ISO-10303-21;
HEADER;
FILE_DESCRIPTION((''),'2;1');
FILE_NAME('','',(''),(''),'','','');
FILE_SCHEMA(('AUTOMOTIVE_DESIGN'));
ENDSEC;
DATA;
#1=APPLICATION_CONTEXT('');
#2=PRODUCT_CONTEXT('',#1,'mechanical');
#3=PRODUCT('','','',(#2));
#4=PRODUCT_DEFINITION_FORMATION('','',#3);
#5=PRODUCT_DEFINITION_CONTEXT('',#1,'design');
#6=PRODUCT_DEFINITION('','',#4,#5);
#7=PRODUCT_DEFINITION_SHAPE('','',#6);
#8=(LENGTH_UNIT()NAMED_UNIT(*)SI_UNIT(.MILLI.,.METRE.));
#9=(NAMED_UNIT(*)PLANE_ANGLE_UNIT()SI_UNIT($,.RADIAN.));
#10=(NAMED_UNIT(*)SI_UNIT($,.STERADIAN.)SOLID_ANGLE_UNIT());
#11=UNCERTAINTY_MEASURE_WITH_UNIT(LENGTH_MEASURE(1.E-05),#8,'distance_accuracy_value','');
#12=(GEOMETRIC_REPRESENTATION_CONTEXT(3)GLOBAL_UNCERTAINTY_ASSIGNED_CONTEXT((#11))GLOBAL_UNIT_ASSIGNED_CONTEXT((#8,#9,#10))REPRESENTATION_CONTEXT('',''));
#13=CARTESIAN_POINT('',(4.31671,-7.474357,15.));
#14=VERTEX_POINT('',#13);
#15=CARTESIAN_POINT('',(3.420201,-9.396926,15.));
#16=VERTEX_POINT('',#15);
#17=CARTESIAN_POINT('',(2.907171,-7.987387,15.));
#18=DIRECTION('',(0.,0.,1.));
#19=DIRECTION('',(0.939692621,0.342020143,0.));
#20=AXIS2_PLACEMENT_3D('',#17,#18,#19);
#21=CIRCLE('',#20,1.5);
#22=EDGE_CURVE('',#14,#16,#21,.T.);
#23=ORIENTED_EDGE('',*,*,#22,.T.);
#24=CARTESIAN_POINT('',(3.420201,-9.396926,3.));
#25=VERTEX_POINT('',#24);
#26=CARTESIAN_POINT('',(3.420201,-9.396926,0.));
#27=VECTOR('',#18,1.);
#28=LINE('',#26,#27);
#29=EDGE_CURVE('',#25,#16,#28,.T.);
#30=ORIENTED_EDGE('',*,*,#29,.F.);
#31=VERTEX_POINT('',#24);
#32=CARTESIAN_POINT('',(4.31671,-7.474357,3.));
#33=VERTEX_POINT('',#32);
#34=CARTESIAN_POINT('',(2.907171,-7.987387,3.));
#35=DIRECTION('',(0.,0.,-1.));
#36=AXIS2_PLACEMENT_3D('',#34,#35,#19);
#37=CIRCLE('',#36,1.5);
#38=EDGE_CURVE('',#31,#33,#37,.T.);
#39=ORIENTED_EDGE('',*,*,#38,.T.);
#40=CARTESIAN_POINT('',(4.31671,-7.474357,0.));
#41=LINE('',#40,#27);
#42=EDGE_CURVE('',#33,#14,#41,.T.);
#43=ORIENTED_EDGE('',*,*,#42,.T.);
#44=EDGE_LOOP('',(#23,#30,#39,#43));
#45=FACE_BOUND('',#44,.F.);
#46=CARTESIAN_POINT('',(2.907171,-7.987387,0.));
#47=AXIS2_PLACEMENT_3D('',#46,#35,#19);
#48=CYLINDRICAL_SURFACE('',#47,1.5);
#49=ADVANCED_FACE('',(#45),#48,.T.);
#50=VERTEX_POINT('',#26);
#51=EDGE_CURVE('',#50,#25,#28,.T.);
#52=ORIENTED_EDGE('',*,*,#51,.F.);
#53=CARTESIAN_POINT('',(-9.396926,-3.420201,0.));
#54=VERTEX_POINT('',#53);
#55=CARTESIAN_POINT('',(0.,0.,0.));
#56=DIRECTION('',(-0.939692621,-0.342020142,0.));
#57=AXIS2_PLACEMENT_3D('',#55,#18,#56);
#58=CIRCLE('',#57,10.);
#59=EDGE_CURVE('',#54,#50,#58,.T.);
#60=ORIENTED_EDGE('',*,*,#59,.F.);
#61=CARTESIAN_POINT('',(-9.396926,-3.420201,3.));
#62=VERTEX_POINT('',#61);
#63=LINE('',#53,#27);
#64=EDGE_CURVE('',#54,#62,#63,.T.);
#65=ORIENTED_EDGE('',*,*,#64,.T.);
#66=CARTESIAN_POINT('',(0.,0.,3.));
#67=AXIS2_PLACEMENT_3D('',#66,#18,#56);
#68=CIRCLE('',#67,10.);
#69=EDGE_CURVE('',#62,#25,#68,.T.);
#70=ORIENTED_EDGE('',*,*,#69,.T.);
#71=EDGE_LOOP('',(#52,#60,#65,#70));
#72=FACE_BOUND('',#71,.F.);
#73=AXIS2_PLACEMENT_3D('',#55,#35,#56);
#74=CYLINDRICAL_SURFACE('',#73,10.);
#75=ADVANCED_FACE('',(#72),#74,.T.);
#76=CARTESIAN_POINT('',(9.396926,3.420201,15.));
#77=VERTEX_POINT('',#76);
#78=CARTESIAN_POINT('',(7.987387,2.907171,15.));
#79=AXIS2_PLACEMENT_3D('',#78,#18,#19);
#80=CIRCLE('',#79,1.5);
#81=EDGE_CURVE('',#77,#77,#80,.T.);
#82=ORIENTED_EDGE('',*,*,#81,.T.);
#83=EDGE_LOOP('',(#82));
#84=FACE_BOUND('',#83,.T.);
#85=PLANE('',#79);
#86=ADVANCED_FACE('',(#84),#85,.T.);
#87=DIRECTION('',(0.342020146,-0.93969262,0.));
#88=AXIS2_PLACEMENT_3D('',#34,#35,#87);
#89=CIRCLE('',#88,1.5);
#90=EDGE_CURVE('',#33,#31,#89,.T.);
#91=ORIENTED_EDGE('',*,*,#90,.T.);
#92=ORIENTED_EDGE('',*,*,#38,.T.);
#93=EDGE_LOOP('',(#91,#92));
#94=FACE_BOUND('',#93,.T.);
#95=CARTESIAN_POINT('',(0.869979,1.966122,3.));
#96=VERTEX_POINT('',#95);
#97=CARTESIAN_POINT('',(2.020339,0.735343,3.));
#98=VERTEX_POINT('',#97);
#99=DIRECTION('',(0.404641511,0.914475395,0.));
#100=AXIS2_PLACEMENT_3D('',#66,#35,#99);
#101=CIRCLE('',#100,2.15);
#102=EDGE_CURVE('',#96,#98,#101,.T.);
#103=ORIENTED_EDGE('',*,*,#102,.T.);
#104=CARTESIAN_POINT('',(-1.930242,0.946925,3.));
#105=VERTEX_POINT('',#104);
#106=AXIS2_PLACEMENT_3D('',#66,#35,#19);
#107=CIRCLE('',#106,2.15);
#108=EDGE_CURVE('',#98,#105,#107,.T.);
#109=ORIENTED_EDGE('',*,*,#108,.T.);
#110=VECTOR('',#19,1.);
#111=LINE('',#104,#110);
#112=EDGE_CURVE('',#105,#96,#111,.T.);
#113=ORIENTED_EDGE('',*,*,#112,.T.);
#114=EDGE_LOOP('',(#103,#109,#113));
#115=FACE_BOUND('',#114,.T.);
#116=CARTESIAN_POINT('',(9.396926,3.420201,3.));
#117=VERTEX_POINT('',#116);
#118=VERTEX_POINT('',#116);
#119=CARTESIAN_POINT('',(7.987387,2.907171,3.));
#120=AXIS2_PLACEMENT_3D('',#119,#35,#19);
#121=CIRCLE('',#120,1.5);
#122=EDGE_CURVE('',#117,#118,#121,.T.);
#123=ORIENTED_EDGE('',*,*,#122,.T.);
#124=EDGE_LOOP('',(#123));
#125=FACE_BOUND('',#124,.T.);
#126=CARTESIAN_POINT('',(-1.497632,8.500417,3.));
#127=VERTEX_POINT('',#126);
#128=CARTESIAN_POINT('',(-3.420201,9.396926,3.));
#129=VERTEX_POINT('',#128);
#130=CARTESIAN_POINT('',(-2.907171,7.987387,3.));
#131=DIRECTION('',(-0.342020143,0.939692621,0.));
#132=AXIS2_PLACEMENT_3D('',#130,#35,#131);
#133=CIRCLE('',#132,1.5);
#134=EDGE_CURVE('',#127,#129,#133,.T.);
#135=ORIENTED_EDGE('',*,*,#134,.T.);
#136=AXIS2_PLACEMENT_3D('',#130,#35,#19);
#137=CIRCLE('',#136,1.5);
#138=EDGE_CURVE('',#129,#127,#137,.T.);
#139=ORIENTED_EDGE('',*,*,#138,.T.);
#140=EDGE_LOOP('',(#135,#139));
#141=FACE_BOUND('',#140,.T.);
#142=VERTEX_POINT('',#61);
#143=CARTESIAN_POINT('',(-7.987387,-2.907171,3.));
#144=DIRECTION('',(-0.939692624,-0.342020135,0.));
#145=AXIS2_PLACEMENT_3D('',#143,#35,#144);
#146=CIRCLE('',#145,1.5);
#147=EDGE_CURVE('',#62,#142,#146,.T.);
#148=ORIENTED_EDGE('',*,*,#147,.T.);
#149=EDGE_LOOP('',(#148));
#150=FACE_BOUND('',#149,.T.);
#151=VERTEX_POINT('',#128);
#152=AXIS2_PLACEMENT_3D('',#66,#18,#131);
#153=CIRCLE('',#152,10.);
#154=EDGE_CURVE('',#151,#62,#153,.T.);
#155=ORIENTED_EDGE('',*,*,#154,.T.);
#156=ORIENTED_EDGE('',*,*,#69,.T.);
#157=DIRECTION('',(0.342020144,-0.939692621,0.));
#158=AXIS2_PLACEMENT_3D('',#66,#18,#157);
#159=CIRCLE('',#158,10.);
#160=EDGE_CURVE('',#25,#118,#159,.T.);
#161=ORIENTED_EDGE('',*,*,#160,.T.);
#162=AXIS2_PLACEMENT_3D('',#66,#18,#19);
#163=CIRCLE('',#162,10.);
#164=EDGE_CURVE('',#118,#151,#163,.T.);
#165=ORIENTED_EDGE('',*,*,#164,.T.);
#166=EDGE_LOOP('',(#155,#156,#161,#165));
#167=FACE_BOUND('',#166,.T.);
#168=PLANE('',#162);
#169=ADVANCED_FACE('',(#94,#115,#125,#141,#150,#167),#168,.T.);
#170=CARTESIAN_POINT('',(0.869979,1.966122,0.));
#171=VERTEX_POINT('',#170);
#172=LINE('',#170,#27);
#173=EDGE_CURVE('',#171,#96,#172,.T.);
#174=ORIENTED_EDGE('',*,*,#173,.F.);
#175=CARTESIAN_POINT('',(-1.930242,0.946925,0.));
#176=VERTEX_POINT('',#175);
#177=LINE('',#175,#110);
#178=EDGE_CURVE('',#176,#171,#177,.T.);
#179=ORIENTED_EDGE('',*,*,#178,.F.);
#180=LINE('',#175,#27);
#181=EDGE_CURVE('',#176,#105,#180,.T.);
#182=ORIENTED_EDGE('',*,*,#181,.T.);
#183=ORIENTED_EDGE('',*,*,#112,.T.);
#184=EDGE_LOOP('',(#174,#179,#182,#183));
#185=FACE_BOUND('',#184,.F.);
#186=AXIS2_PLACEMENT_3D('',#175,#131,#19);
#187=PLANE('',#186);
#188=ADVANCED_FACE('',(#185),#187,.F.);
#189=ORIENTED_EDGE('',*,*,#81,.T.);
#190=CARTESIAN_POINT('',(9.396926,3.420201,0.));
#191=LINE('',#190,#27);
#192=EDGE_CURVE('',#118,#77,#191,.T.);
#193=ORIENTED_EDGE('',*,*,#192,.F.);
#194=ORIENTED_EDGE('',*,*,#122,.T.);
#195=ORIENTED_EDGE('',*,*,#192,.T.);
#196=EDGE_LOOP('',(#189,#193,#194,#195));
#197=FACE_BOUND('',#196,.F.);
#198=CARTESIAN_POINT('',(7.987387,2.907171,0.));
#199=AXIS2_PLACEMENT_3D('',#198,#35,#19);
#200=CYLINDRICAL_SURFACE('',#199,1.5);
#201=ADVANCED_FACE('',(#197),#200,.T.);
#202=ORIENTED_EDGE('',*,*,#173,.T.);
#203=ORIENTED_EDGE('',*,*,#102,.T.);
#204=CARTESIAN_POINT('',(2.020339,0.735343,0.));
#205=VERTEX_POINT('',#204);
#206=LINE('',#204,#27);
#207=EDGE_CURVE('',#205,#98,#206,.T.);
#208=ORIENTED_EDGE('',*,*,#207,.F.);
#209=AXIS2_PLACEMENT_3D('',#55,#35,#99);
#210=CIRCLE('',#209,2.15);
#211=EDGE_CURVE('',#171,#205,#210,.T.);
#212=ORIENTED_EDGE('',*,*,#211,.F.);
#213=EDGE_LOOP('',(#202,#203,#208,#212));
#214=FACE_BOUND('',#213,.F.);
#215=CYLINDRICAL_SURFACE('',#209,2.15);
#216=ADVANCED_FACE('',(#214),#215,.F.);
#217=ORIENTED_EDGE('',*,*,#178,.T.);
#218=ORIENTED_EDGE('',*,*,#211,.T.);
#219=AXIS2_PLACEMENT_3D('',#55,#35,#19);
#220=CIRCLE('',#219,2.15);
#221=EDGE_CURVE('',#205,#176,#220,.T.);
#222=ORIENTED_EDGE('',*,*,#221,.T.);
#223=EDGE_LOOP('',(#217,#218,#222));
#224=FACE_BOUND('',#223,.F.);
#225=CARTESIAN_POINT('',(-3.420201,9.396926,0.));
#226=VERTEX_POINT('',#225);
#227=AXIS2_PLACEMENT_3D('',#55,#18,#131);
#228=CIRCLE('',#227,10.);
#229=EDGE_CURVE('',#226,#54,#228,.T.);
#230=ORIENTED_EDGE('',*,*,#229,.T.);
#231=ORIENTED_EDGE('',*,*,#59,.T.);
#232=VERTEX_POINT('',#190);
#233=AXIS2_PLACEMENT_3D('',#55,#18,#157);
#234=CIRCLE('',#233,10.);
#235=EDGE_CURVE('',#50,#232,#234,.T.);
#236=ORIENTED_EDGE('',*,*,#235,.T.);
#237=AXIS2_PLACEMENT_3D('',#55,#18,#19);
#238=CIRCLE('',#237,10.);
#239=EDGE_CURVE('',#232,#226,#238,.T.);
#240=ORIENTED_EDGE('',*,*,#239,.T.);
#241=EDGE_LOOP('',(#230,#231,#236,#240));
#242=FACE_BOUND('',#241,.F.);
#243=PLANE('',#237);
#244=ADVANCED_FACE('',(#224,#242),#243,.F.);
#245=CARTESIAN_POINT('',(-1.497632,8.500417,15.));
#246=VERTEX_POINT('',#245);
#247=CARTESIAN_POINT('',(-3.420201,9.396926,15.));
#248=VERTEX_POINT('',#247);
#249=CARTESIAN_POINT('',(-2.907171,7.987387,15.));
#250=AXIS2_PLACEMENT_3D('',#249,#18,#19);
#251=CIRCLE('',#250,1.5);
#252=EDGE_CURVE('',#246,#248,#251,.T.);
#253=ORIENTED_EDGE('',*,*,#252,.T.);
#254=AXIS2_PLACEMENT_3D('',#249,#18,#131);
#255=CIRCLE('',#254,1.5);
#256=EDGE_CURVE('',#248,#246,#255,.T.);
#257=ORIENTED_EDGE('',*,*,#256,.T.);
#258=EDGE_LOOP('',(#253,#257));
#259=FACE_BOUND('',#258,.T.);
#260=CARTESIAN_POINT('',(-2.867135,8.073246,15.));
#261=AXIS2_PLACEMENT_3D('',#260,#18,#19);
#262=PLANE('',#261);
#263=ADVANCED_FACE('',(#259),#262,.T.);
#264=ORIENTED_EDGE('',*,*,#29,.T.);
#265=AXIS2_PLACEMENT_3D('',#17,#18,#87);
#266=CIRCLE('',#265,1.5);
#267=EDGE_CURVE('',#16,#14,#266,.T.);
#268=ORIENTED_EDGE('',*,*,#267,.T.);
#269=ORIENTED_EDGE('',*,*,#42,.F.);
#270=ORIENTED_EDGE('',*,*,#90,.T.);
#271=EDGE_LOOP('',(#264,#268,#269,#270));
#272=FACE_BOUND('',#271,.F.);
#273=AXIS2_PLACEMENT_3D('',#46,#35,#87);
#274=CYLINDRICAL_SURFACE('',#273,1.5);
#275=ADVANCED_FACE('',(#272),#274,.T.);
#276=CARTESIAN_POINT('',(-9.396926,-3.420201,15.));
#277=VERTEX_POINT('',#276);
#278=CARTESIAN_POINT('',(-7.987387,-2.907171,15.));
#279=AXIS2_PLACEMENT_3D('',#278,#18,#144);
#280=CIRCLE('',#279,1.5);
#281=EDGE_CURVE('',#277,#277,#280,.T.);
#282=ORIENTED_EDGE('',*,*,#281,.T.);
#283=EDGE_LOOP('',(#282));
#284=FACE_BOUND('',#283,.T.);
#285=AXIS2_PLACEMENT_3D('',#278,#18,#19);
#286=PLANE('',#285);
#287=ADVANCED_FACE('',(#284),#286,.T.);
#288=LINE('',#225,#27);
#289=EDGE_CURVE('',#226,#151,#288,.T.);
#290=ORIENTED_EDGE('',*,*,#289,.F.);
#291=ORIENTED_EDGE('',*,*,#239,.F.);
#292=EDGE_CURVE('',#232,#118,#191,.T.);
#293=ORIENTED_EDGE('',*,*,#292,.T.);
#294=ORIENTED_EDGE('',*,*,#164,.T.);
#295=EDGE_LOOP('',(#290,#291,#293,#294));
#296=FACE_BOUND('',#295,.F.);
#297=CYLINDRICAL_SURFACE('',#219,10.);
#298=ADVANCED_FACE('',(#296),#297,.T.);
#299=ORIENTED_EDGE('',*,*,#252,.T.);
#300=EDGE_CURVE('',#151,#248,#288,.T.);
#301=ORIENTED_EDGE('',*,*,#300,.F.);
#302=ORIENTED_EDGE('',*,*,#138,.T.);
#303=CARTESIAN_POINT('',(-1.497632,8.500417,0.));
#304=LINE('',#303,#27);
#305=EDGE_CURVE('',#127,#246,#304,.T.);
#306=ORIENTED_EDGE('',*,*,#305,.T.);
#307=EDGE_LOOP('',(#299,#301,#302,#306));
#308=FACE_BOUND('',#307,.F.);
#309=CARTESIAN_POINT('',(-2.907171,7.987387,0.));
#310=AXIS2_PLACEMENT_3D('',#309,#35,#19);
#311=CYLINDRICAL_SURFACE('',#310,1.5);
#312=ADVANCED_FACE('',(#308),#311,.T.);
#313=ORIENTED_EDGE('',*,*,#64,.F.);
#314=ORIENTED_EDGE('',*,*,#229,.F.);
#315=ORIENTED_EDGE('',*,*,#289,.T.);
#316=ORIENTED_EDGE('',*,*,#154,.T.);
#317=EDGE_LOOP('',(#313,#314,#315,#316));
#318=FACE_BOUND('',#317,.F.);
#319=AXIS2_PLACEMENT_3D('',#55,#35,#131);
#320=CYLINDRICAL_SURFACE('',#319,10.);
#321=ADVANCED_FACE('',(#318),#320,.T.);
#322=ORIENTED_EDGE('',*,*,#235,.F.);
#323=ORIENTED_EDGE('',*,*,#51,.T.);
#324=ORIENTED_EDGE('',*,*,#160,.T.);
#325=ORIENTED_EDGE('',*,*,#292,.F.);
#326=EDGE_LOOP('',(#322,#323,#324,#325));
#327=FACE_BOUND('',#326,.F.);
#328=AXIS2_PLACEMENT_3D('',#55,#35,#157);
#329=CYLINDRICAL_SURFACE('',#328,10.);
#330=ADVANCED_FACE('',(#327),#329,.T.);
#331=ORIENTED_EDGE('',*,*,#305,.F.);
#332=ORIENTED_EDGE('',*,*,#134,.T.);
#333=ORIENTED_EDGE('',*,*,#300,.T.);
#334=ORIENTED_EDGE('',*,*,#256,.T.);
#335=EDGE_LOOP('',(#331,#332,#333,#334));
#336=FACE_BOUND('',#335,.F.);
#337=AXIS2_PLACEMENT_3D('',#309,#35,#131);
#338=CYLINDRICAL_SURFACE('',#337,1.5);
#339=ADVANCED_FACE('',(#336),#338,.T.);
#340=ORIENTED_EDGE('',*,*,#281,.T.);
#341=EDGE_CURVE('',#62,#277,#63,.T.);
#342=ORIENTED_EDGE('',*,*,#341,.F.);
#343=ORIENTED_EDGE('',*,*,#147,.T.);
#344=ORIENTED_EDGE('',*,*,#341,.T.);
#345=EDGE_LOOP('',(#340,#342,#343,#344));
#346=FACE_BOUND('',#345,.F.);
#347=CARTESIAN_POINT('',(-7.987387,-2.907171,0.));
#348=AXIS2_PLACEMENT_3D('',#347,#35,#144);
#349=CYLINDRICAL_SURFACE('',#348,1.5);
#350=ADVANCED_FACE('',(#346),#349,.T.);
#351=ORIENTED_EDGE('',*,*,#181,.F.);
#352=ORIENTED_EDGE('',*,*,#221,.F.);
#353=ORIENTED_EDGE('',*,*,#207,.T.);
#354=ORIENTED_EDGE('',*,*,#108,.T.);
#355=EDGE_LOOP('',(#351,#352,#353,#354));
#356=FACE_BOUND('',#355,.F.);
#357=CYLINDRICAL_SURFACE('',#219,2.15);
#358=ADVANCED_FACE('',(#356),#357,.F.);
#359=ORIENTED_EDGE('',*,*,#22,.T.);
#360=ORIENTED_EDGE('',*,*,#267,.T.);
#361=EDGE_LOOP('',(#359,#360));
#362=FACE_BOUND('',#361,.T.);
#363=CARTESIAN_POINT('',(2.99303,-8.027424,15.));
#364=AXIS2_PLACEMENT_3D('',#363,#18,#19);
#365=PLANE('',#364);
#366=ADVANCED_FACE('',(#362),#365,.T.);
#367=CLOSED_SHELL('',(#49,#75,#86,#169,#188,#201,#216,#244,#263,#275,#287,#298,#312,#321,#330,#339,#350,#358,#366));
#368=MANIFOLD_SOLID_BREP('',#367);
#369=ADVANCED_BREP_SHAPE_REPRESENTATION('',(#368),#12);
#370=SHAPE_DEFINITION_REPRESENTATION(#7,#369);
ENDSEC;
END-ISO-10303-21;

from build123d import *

# Parameters (mm, degrees)
F0_R     = 1.5
F1_DEPTH = 3
F2_DEPTH = 15
F4_ANGLE = 20


# Not quite as in the source:
# - a feature names something its author has since deleted; it is built from what else it names


with BuildPart() as f1:
    # F0 (on Top) → F1 (new body)
    with BuildSketch(Plane.XY):
        with BuildLine():
            ThreePointArc((4.3e-09, -10), (7.0710678134, -7.0710678103), (10, 0))
            ThreePointArc((10, 0), (7.0710678119, 7.0710678119), (0, 10))
            ThreePointArc((0, 10), (-7.0710678074, 7.0710678163), (-10, 1.26e-08))
            ThreePointArc((-10, 1.26e-08), (-7.0710678148, -7.0710678089), (4.3e-09, -10))
        make_face()
        with BuildLine():
            ThreePointArc((1.5, -8.5), (1.0606601733, -9.5606601703), (4.3e-09, -10))
            ThreePointArc((4.3e-09, -10), (-1.0606601733, -7.4393398297), (1.5, -8.5))
        make_face(mode=Mode.SUBTRACT)
        with BuildLine():
            ThreePointArc((-7, 0), (-8.5000000063, -1.5), (-10, 1.26e-08))
            ThreePointArc((-10, 1.26e-08), (-8.4999999937, 1.5), (-7, 0))
        make_face(mode=Mode.SUBTRACT)
        with BuildLine():
            ThreePointArc((1.4899664426, 1.55), (1.9781213122, 0.842339643), (2.15, 0))
            ThreePointArc((2.15, 0), (-0.842339643, -1.9781213122), (-1.4899664426, 1.55))
            ThreePointArc((-1.4899664426, 1.55), (0, 2.15), (1.4899664426, 1.55))
        make_face(mode=Mode.SUBTRACT)
        with Locations((8.5, 0)):
            Circle(F0_R, mode=Mode.SUBTRACT)
        with BuildLine():
            ThreePointArc((1.5, 8.5), (-1.0606601718, 7.4393398282), (0, 10))
            ThreePointArc((0, 10), (1.0606601718, 9.5606601718), (1.5, 8.5))
        make_face(mode=Mode.SUBTRACT)
        with BuildLine():
            ThreePointArc((-7, 0), (-8.4999999937, 1.5), (-10, 1.26e-08))
            ThreePointArc((-10, 1.26e-08), (-8.5000000063, -1.5), (-7, 0))
        make_face()
        with BuildLine():
            ThreePointArc((1.5, -8.5), (-1.0606601733, -7.4393398297), (4.3e-09, -10))
            ThreePointArc((4.3e-09, -10), (1.0606601733, -9.5606601703), (1.5, -8.5))
        make_face()
        with Locations((8.5, 0)):
            Circle(F0_R)
        with BuildLine():
            ThreePointArc((1.5, 8.5), (1.0606601718, 9.5606601718), (0, 10))
            ThreePointArc((0, 10), (-1.0606601718, 7.4393398282), (1.5, 8.5))
        make_face()
        with BuildLine():
            Line((-1.4899664426, 1.55), (1.4899664426, 1.55))
            ThreePointArc((1.4899664426, 1.55), (0, 2.15), (-1.4899664426, 1.55))
        make_face()
    extrude(amount=F1_DEPTH)

    # F0 (on Top) → F2 (join)
    with BuildSketch(Plane.XY):
        with BuildLine():
            ThreePointArc((1.5, 8.5), (1.0606601718, 9.5606601718), (0, 10))
            ThreePointArc((0, 10), (-1.0606601718, 7.4393398282), (1.5, 8.5))
        make_face()
        with BuildLine():
            ThreePointArc((-7, 0), (-8.4999999937, 1.5), (-10, 1.26e-08))
            ThreePointArc((-10, 1.26e-08), (-8.5000000063, -1.5), (-7, 0))
        make_face()
        with BuildLine():
            ThreePointArc((1.5, -8.5), (-1.0606601733, -7.4393398297), (4.3e-09, -10))
            ThreePointArc((4.3e-09, -10), (1.0606601733, -9.5606601703), (1.5, -8.5))
        make_face()
        with Locations((8.5, 0)):
            Circle(F0_R)
    extrude(amount=F2_DEPTH)


with BuildPart() as f1_1:
    # F4: moved
    add(f1.part.rotate(Axis((0, 0, 24.3583247066), (0, 0, 1)), F4_ANGLE))


solid = f1_1.part
